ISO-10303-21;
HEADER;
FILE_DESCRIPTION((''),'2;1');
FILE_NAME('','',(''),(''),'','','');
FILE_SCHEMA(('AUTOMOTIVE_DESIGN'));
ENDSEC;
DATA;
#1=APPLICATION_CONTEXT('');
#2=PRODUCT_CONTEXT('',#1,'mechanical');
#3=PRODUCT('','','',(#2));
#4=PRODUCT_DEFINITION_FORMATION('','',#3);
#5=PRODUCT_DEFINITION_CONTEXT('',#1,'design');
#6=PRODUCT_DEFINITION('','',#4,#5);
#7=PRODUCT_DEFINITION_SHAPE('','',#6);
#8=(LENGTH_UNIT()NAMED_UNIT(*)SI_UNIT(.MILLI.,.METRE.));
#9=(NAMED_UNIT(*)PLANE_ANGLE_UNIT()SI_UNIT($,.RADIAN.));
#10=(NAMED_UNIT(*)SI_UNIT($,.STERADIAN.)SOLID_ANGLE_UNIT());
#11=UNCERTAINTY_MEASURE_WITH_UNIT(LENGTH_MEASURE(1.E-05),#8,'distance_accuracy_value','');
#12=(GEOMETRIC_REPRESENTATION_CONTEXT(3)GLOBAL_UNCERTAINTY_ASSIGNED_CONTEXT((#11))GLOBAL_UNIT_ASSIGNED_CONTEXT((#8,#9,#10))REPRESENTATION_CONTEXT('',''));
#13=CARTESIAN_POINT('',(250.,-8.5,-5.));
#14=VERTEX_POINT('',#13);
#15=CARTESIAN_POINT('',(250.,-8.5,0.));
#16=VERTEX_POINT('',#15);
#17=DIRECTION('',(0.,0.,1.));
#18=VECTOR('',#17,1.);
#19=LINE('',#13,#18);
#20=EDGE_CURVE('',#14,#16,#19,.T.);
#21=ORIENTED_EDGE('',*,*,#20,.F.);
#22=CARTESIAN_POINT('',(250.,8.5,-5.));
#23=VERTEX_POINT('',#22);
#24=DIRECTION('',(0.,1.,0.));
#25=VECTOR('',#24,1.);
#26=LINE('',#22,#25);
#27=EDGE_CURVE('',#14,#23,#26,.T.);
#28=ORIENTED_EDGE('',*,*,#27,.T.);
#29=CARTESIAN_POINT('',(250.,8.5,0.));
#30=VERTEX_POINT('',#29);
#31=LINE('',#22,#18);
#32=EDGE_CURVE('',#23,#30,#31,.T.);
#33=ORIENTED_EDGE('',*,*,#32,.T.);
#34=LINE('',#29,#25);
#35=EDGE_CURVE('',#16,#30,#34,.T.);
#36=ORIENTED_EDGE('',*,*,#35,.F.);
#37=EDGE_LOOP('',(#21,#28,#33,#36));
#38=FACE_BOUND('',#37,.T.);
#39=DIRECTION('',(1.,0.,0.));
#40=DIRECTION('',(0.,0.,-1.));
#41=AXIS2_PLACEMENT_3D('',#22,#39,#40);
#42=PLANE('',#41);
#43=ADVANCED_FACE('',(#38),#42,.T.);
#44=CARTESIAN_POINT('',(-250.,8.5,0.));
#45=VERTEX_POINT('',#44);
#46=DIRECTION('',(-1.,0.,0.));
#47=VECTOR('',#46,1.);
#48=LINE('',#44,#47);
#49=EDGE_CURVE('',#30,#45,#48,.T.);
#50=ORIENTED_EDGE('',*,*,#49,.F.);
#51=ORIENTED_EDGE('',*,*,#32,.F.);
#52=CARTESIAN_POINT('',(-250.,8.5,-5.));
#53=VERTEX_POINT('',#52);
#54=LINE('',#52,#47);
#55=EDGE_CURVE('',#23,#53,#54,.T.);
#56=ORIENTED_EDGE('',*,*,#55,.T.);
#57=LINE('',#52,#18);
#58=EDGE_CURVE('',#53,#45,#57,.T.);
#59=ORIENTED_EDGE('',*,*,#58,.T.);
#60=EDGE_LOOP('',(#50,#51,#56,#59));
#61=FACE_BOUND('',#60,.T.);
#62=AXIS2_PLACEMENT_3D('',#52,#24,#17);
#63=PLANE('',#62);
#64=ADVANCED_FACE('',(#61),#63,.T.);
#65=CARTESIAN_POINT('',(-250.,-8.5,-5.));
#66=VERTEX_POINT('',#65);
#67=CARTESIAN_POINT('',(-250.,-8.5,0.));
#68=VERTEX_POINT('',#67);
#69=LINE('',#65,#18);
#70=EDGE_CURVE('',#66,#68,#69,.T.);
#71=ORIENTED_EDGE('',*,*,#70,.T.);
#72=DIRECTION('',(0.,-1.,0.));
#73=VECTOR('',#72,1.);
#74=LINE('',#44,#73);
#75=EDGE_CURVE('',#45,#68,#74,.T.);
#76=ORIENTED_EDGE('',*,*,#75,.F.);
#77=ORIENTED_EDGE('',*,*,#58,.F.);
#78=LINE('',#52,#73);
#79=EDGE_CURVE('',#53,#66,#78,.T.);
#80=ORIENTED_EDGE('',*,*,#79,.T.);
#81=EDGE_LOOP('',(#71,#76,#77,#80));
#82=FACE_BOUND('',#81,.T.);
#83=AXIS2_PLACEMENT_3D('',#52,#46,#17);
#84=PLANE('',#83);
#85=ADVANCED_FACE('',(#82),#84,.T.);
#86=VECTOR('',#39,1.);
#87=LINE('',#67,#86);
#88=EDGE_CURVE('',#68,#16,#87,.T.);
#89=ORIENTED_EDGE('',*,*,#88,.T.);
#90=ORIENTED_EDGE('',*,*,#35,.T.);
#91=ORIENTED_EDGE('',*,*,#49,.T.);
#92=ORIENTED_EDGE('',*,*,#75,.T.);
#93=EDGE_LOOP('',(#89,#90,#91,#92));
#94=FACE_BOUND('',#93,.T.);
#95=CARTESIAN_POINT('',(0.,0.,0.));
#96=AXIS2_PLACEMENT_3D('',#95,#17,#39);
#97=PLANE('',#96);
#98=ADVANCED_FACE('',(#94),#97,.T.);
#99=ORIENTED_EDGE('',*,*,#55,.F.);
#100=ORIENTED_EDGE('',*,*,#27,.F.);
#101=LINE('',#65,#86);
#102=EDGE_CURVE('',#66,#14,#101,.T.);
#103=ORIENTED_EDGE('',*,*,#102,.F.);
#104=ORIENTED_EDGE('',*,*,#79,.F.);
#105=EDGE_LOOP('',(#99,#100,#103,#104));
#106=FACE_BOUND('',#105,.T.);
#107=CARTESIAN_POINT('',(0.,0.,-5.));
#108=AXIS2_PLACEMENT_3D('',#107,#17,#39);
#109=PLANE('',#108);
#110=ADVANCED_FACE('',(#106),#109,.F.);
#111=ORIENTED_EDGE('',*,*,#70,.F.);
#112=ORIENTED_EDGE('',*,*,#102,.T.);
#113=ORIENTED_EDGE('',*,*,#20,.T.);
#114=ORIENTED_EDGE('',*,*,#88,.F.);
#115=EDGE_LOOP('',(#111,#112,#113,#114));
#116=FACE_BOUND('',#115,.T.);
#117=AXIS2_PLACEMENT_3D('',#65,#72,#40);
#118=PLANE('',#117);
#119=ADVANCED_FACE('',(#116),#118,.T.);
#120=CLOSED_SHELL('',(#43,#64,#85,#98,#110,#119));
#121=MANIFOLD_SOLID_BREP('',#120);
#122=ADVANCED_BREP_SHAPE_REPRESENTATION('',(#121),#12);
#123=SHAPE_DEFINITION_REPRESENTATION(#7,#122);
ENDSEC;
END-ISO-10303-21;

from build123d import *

# Parameters (mm, degrees)
SKETCH1_W          = 500
SKETCH1_H          = 17
BASE_FLANGE1_DEPTH = 5


# Sheet-metal steps are written as plain solids
with BuildPart() as part:
    # Sketch1 → Base-Flange1 (new body)
    with BuildSketch(Plane.XY):
        Rectangle(SKETCH1_W, SKETCH1_H)
    extrude(amount=-BASE_FLANGE1_DEPTH)


solid = part.part
